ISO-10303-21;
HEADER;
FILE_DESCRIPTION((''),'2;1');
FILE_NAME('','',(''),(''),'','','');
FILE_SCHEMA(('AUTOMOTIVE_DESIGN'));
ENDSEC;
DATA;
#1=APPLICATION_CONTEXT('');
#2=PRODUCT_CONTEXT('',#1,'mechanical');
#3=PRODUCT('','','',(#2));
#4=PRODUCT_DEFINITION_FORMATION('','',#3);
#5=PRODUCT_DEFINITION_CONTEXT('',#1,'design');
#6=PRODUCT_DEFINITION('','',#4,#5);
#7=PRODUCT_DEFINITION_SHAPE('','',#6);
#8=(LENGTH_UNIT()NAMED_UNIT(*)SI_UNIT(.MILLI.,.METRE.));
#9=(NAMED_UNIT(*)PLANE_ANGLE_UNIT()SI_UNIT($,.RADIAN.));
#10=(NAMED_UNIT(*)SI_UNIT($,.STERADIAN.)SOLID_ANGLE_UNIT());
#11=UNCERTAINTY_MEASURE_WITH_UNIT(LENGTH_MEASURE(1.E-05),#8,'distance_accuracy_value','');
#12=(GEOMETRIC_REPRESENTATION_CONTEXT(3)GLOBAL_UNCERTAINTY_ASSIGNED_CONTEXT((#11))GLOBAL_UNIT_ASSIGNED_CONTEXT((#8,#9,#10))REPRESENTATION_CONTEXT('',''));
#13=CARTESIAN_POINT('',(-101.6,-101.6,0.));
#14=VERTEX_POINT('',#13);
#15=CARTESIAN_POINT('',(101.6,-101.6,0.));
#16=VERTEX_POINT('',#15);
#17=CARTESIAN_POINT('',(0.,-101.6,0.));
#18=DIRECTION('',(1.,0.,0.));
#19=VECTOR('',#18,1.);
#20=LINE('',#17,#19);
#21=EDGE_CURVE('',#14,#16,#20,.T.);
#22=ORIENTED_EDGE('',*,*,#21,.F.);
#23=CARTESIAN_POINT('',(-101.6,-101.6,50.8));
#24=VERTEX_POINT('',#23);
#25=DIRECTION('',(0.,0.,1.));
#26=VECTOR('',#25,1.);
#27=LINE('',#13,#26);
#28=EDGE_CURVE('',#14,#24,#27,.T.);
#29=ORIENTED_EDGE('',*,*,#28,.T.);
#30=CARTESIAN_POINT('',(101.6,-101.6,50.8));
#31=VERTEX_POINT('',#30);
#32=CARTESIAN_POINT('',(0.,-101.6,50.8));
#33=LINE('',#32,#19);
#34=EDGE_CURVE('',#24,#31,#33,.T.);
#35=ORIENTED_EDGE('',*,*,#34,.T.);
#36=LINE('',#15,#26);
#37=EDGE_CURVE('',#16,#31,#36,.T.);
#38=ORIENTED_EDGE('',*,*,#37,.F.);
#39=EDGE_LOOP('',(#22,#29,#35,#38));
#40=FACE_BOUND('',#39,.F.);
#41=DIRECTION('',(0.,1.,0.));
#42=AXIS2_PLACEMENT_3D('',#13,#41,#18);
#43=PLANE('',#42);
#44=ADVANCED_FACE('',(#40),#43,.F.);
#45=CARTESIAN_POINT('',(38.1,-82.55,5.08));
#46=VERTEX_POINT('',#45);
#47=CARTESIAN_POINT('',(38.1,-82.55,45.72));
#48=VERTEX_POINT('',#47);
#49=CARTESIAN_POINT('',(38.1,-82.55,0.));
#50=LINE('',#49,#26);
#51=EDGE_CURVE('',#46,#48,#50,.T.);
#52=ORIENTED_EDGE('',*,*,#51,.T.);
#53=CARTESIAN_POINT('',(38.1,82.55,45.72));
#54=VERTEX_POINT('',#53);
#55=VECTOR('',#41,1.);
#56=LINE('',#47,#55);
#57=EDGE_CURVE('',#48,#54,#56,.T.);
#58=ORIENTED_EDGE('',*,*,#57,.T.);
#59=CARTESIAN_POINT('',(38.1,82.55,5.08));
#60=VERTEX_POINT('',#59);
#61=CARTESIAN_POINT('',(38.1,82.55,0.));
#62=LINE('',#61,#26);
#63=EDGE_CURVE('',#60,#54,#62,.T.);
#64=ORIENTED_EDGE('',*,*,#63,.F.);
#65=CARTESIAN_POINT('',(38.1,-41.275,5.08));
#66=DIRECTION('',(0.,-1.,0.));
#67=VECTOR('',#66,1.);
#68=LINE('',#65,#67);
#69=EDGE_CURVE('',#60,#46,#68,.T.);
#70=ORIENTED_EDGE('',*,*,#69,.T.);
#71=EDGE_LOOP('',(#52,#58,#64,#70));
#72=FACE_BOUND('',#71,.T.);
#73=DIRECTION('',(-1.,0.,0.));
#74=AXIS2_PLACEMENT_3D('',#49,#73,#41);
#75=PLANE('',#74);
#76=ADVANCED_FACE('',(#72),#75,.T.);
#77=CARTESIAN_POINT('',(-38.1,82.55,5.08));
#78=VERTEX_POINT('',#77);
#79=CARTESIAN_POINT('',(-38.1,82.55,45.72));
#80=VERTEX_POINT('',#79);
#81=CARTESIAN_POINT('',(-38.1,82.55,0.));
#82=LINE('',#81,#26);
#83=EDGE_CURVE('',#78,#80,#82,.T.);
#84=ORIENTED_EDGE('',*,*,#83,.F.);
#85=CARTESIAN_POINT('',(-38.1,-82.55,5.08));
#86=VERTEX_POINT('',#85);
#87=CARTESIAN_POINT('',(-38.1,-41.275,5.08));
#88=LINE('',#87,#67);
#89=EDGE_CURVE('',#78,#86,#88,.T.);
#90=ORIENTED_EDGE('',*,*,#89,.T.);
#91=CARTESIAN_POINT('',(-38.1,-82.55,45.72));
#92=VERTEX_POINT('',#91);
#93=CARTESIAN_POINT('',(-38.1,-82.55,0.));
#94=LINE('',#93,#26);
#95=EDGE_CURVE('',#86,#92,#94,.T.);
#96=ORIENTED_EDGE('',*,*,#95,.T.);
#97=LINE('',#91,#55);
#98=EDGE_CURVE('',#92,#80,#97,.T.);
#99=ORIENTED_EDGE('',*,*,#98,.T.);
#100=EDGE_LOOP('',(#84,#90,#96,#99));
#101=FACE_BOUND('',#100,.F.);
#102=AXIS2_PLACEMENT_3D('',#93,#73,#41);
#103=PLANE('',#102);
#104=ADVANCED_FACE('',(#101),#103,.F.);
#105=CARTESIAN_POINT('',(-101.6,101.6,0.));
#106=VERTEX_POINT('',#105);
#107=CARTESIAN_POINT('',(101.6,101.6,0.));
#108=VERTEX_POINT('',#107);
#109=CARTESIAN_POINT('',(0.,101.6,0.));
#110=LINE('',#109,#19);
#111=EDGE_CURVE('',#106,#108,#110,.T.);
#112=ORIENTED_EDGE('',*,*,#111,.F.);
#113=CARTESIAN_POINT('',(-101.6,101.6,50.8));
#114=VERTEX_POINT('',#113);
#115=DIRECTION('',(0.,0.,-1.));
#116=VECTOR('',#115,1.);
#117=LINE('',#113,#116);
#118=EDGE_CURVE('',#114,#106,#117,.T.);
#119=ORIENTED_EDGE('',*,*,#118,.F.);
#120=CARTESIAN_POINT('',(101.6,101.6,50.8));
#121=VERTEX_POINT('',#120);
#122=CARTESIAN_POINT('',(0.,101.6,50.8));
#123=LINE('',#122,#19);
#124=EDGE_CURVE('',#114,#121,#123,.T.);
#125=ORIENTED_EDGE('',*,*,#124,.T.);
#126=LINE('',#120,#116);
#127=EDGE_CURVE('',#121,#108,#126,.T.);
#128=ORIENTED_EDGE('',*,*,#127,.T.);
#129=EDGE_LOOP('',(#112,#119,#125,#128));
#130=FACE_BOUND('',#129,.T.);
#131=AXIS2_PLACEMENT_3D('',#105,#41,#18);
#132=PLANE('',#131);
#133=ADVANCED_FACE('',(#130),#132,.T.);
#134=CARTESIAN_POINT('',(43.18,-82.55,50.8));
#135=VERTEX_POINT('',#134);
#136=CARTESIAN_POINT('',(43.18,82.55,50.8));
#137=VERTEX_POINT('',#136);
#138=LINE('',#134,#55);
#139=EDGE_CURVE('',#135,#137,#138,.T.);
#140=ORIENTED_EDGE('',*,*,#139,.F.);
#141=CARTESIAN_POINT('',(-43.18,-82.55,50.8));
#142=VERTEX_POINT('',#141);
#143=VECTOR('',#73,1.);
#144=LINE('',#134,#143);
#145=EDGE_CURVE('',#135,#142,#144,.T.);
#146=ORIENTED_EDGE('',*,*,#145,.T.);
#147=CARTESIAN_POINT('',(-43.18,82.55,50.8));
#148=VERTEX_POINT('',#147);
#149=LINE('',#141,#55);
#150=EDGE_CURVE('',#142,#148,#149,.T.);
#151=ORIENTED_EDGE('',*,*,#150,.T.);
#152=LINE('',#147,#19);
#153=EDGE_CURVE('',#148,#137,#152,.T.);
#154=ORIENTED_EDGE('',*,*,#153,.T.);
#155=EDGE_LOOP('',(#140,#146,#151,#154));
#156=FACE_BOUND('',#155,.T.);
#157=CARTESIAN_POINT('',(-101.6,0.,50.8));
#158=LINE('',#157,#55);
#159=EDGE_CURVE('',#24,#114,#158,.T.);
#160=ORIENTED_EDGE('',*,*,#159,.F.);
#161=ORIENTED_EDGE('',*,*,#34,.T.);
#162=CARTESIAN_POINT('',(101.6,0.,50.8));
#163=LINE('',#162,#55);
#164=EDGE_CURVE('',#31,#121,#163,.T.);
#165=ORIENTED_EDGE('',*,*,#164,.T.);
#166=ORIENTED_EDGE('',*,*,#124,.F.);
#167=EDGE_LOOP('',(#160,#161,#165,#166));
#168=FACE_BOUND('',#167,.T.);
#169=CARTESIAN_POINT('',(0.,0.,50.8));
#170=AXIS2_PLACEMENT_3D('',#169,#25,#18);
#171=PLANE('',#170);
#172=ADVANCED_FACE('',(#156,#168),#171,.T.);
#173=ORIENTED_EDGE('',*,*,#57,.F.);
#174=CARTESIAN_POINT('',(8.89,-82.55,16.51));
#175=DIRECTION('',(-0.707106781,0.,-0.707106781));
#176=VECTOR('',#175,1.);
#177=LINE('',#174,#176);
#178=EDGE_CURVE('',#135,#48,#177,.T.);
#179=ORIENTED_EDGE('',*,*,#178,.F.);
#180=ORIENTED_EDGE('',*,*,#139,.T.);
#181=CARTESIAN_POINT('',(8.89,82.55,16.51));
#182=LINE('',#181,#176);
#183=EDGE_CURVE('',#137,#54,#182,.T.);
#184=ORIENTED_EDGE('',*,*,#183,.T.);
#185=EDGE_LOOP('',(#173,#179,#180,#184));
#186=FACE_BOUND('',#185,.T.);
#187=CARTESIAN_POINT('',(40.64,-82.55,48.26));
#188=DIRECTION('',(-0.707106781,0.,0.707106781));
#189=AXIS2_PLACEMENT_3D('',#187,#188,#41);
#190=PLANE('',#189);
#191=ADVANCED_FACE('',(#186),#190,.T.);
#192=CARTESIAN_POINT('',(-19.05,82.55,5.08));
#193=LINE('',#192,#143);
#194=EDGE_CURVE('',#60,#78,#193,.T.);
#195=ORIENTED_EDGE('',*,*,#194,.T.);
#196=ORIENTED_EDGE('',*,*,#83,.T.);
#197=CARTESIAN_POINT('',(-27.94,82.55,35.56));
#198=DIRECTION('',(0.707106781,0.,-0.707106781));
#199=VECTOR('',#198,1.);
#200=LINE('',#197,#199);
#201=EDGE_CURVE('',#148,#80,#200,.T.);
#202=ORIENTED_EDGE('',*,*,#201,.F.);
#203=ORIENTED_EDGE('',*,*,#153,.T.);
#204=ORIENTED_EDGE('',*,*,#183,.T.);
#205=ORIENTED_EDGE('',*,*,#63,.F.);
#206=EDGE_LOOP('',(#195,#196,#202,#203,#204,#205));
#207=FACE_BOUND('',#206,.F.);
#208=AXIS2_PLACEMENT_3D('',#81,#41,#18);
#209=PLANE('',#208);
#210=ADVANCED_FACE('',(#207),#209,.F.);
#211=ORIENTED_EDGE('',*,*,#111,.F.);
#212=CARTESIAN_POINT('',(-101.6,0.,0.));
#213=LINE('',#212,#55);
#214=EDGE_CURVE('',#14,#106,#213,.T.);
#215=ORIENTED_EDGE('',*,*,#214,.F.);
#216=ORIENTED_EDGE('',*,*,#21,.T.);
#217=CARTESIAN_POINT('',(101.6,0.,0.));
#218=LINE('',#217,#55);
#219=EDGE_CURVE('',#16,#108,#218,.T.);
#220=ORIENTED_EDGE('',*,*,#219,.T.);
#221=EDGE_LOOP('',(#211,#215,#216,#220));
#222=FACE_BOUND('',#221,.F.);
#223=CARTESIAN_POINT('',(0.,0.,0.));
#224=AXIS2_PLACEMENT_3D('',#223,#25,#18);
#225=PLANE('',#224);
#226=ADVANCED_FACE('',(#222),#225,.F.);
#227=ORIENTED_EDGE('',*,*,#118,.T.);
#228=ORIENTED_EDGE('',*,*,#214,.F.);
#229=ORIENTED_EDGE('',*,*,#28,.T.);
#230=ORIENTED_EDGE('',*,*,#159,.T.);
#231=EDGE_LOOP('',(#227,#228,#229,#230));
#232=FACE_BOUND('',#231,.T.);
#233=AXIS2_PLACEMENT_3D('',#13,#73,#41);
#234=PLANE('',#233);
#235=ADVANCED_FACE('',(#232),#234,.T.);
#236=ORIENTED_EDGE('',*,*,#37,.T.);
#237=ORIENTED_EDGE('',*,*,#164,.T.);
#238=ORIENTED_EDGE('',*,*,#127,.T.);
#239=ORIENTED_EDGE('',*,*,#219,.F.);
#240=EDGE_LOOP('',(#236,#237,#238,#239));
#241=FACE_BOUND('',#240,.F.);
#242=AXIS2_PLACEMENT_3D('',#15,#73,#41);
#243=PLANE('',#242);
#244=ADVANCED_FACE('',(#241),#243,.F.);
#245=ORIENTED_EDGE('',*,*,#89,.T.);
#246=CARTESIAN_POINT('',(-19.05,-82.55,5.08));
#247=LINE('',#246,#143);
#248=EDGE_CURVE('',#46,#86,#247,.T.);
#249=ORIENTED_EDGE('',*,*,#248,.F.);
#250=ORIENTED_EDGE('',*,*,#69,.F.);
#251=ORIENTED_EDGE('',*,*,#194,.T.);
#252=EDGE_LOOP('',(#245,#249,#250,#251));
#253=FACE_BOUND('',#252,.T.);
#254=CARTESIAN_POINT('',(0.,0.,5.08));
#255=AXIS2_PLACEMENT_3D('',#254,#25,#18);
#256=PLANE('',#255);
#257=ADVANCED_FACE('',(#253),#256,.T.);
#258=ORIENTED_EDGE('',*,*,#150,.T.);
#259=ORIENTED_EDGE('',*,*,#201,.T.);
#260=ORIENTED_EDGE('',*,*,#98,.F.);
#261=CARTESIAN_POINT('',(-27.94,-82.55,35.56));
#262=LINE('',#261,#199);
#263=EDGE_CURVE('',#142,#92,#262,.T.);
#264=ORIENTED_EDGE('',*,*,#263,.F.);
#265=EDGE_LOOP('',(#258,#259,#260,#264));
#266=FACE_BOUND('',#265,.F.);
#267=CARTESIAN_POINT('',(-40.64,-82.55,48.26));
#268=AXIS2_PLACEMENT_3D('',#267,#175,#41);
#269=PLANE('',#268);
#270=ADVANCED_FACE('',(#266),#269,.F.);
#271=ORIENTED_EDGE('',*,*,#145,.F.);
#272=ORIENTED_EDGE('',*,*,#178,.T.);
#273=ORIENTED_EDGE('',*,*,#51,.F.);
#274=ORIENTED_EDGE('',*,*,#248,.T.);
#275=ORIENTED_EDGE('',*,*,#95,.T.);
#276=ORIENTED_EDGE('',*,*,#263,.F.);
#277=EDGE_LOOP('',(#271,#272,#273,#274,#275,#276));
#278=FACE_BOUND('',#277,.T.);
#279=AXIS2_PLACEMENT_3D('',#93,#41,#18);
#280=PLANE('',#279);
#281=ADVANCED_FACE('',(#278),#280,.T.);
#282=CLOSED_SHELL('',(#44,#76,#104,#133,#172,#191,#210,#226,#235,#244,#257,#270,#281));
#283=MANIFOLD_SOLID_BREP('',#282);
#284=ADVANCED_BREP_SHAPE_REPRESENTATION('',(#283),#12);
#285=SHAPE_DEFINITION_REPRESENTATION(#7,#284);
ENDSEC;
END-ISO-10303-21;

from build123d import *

# Parameters (mm, degrees)
F0_W     = 203.2
F0_H     = 203.2
F0_W_2   = 76.2
F0_H_2   = 165.1
F1_DEPTH = 5.08
F2_DEPTH = 50.8
F3_SIZE  = 5.08


with BuildPart() as f1:
    # F0 (on Top) → F1 (new body)
    with BuildSketch(Plane.XY):
        Rectangle(F0_W, F0_H)
        Rectangle(F0_W_2, F0_H_2, mode=Mode.SUBTRACT)
        Rectangle(F0_W_2, F0_H_2)
    extrude(amount=F1_DEPTH)

    # F0 (on Top) → F2 (join)
    with BuildSketch(Plane.XY):
        Rectangle(F0_W, F0_H)
        Rectangle(F0_W_2, F0_H_2, mode=Mode.SUBTRACT)
    extrude(amount=F2_DEPTH)

    # F3
    f3_edges = [f1.edges().sort_by_distance(p)[0] for p in [
        (-38.1, 0, 50.8),
        (38.1, 0, 50.8),
    ]]
    chamfer(f3_edges, length=F3_SIZE)


solid = f1.part
